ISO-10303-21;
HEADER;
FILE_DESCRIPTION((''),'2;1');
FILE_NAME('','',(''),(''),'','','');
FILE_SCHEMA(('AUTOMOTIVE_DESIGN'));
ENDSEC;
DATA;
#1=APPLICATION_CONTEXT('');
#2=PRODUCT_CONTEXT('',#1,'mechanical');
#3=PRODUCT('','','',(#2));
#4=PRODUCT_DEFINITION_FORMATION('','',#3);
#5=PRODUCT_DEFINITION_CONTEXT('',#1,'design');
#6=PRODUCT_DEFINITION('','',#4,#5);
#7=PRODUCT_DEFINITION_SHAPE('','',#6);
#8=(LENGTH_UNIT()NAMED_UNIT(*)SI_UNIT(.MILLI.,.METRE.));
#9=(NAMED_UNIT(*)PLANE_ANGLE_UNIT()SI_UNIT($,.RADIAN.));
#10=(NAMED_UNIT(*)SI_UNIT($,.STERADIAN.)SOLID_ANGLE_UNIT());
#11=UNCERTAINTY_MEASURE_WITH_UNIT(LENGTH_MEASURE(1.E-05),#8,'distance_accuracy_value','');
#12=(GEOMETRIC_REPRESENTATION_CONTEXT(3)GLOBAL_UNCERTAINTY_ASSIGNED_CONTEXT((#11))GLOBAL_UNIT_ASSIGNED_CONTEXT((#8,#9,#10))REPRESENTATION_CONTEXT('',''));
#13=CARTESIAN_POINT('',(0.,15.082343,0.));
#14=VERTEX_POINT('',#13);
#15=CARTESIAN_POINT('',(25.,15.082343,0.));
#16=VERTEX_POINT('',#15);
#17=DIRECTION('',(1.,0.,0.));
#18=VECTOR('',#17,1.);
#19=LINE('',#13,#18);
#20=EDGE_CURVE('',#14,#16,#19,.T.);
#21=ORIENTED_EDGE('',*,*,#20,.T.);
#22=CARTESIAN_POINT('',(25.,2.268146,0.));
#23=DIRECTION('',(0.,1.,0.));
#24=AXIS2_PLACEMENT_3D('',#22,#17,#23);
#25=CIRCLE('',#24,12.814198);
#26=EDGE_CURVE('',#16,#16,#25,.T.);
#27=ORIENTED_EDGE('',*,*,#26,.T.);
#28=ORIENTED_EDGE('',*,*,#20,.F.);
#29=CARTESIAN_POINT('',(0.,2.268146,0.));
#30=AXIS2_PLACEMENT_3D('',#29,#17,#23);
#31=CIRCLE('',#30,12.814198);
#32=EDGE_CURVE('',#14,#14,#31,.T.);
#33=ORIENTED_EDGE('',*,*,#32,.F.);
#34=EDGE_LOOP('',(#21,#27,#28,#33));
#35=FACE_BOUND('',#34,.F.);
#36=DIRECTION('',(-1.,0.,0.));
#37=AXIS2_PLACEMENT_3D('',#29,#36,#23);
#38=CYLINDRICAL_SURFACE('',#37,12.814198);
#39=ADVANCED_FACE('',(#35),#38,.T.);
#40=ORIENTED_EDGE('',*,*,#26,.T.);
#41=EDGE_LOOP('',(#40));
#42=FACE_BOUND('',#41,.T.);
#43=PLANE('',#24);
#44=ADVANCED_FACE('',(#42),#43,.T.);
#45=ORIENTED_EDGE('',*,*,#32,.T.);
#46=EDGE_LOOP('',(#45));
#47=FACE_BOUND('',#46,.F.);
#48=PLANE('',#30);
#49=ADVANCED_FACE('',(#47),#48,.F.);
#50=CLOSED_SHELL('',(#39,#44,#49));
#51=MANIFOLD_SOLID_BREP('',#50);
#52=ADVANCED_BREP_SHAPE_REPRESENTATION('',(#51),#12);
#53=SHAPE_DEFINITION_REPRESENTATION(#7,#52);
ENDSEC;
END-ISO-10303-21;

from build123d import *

# Parameters (mm, degrees)
F1_R     = 12.8141976258
F1_R_2   = 10
F2_DEPTH = 25


# Not quite as in the source:
# - the program builds the solid bodies; features that only make, move or delete a surface that nothing else refers to are left out


with BuildPart() as f2:
    # F1 (on face) → F2 (new body)
    with BuildSketch(Plane.YZ):
        with Locations((2.2681457922, 0)):
            Circle(F1_R)
        with Locations((2.0192302763, 0)):
            Circle(F1_R_2, mode=Mode.SUBTRACT)
        with Locations((2.0192302763, 0)):
            Circle(F1_R_2)
    extrude(amount=F2_DEPTH)


solid = f2.part
